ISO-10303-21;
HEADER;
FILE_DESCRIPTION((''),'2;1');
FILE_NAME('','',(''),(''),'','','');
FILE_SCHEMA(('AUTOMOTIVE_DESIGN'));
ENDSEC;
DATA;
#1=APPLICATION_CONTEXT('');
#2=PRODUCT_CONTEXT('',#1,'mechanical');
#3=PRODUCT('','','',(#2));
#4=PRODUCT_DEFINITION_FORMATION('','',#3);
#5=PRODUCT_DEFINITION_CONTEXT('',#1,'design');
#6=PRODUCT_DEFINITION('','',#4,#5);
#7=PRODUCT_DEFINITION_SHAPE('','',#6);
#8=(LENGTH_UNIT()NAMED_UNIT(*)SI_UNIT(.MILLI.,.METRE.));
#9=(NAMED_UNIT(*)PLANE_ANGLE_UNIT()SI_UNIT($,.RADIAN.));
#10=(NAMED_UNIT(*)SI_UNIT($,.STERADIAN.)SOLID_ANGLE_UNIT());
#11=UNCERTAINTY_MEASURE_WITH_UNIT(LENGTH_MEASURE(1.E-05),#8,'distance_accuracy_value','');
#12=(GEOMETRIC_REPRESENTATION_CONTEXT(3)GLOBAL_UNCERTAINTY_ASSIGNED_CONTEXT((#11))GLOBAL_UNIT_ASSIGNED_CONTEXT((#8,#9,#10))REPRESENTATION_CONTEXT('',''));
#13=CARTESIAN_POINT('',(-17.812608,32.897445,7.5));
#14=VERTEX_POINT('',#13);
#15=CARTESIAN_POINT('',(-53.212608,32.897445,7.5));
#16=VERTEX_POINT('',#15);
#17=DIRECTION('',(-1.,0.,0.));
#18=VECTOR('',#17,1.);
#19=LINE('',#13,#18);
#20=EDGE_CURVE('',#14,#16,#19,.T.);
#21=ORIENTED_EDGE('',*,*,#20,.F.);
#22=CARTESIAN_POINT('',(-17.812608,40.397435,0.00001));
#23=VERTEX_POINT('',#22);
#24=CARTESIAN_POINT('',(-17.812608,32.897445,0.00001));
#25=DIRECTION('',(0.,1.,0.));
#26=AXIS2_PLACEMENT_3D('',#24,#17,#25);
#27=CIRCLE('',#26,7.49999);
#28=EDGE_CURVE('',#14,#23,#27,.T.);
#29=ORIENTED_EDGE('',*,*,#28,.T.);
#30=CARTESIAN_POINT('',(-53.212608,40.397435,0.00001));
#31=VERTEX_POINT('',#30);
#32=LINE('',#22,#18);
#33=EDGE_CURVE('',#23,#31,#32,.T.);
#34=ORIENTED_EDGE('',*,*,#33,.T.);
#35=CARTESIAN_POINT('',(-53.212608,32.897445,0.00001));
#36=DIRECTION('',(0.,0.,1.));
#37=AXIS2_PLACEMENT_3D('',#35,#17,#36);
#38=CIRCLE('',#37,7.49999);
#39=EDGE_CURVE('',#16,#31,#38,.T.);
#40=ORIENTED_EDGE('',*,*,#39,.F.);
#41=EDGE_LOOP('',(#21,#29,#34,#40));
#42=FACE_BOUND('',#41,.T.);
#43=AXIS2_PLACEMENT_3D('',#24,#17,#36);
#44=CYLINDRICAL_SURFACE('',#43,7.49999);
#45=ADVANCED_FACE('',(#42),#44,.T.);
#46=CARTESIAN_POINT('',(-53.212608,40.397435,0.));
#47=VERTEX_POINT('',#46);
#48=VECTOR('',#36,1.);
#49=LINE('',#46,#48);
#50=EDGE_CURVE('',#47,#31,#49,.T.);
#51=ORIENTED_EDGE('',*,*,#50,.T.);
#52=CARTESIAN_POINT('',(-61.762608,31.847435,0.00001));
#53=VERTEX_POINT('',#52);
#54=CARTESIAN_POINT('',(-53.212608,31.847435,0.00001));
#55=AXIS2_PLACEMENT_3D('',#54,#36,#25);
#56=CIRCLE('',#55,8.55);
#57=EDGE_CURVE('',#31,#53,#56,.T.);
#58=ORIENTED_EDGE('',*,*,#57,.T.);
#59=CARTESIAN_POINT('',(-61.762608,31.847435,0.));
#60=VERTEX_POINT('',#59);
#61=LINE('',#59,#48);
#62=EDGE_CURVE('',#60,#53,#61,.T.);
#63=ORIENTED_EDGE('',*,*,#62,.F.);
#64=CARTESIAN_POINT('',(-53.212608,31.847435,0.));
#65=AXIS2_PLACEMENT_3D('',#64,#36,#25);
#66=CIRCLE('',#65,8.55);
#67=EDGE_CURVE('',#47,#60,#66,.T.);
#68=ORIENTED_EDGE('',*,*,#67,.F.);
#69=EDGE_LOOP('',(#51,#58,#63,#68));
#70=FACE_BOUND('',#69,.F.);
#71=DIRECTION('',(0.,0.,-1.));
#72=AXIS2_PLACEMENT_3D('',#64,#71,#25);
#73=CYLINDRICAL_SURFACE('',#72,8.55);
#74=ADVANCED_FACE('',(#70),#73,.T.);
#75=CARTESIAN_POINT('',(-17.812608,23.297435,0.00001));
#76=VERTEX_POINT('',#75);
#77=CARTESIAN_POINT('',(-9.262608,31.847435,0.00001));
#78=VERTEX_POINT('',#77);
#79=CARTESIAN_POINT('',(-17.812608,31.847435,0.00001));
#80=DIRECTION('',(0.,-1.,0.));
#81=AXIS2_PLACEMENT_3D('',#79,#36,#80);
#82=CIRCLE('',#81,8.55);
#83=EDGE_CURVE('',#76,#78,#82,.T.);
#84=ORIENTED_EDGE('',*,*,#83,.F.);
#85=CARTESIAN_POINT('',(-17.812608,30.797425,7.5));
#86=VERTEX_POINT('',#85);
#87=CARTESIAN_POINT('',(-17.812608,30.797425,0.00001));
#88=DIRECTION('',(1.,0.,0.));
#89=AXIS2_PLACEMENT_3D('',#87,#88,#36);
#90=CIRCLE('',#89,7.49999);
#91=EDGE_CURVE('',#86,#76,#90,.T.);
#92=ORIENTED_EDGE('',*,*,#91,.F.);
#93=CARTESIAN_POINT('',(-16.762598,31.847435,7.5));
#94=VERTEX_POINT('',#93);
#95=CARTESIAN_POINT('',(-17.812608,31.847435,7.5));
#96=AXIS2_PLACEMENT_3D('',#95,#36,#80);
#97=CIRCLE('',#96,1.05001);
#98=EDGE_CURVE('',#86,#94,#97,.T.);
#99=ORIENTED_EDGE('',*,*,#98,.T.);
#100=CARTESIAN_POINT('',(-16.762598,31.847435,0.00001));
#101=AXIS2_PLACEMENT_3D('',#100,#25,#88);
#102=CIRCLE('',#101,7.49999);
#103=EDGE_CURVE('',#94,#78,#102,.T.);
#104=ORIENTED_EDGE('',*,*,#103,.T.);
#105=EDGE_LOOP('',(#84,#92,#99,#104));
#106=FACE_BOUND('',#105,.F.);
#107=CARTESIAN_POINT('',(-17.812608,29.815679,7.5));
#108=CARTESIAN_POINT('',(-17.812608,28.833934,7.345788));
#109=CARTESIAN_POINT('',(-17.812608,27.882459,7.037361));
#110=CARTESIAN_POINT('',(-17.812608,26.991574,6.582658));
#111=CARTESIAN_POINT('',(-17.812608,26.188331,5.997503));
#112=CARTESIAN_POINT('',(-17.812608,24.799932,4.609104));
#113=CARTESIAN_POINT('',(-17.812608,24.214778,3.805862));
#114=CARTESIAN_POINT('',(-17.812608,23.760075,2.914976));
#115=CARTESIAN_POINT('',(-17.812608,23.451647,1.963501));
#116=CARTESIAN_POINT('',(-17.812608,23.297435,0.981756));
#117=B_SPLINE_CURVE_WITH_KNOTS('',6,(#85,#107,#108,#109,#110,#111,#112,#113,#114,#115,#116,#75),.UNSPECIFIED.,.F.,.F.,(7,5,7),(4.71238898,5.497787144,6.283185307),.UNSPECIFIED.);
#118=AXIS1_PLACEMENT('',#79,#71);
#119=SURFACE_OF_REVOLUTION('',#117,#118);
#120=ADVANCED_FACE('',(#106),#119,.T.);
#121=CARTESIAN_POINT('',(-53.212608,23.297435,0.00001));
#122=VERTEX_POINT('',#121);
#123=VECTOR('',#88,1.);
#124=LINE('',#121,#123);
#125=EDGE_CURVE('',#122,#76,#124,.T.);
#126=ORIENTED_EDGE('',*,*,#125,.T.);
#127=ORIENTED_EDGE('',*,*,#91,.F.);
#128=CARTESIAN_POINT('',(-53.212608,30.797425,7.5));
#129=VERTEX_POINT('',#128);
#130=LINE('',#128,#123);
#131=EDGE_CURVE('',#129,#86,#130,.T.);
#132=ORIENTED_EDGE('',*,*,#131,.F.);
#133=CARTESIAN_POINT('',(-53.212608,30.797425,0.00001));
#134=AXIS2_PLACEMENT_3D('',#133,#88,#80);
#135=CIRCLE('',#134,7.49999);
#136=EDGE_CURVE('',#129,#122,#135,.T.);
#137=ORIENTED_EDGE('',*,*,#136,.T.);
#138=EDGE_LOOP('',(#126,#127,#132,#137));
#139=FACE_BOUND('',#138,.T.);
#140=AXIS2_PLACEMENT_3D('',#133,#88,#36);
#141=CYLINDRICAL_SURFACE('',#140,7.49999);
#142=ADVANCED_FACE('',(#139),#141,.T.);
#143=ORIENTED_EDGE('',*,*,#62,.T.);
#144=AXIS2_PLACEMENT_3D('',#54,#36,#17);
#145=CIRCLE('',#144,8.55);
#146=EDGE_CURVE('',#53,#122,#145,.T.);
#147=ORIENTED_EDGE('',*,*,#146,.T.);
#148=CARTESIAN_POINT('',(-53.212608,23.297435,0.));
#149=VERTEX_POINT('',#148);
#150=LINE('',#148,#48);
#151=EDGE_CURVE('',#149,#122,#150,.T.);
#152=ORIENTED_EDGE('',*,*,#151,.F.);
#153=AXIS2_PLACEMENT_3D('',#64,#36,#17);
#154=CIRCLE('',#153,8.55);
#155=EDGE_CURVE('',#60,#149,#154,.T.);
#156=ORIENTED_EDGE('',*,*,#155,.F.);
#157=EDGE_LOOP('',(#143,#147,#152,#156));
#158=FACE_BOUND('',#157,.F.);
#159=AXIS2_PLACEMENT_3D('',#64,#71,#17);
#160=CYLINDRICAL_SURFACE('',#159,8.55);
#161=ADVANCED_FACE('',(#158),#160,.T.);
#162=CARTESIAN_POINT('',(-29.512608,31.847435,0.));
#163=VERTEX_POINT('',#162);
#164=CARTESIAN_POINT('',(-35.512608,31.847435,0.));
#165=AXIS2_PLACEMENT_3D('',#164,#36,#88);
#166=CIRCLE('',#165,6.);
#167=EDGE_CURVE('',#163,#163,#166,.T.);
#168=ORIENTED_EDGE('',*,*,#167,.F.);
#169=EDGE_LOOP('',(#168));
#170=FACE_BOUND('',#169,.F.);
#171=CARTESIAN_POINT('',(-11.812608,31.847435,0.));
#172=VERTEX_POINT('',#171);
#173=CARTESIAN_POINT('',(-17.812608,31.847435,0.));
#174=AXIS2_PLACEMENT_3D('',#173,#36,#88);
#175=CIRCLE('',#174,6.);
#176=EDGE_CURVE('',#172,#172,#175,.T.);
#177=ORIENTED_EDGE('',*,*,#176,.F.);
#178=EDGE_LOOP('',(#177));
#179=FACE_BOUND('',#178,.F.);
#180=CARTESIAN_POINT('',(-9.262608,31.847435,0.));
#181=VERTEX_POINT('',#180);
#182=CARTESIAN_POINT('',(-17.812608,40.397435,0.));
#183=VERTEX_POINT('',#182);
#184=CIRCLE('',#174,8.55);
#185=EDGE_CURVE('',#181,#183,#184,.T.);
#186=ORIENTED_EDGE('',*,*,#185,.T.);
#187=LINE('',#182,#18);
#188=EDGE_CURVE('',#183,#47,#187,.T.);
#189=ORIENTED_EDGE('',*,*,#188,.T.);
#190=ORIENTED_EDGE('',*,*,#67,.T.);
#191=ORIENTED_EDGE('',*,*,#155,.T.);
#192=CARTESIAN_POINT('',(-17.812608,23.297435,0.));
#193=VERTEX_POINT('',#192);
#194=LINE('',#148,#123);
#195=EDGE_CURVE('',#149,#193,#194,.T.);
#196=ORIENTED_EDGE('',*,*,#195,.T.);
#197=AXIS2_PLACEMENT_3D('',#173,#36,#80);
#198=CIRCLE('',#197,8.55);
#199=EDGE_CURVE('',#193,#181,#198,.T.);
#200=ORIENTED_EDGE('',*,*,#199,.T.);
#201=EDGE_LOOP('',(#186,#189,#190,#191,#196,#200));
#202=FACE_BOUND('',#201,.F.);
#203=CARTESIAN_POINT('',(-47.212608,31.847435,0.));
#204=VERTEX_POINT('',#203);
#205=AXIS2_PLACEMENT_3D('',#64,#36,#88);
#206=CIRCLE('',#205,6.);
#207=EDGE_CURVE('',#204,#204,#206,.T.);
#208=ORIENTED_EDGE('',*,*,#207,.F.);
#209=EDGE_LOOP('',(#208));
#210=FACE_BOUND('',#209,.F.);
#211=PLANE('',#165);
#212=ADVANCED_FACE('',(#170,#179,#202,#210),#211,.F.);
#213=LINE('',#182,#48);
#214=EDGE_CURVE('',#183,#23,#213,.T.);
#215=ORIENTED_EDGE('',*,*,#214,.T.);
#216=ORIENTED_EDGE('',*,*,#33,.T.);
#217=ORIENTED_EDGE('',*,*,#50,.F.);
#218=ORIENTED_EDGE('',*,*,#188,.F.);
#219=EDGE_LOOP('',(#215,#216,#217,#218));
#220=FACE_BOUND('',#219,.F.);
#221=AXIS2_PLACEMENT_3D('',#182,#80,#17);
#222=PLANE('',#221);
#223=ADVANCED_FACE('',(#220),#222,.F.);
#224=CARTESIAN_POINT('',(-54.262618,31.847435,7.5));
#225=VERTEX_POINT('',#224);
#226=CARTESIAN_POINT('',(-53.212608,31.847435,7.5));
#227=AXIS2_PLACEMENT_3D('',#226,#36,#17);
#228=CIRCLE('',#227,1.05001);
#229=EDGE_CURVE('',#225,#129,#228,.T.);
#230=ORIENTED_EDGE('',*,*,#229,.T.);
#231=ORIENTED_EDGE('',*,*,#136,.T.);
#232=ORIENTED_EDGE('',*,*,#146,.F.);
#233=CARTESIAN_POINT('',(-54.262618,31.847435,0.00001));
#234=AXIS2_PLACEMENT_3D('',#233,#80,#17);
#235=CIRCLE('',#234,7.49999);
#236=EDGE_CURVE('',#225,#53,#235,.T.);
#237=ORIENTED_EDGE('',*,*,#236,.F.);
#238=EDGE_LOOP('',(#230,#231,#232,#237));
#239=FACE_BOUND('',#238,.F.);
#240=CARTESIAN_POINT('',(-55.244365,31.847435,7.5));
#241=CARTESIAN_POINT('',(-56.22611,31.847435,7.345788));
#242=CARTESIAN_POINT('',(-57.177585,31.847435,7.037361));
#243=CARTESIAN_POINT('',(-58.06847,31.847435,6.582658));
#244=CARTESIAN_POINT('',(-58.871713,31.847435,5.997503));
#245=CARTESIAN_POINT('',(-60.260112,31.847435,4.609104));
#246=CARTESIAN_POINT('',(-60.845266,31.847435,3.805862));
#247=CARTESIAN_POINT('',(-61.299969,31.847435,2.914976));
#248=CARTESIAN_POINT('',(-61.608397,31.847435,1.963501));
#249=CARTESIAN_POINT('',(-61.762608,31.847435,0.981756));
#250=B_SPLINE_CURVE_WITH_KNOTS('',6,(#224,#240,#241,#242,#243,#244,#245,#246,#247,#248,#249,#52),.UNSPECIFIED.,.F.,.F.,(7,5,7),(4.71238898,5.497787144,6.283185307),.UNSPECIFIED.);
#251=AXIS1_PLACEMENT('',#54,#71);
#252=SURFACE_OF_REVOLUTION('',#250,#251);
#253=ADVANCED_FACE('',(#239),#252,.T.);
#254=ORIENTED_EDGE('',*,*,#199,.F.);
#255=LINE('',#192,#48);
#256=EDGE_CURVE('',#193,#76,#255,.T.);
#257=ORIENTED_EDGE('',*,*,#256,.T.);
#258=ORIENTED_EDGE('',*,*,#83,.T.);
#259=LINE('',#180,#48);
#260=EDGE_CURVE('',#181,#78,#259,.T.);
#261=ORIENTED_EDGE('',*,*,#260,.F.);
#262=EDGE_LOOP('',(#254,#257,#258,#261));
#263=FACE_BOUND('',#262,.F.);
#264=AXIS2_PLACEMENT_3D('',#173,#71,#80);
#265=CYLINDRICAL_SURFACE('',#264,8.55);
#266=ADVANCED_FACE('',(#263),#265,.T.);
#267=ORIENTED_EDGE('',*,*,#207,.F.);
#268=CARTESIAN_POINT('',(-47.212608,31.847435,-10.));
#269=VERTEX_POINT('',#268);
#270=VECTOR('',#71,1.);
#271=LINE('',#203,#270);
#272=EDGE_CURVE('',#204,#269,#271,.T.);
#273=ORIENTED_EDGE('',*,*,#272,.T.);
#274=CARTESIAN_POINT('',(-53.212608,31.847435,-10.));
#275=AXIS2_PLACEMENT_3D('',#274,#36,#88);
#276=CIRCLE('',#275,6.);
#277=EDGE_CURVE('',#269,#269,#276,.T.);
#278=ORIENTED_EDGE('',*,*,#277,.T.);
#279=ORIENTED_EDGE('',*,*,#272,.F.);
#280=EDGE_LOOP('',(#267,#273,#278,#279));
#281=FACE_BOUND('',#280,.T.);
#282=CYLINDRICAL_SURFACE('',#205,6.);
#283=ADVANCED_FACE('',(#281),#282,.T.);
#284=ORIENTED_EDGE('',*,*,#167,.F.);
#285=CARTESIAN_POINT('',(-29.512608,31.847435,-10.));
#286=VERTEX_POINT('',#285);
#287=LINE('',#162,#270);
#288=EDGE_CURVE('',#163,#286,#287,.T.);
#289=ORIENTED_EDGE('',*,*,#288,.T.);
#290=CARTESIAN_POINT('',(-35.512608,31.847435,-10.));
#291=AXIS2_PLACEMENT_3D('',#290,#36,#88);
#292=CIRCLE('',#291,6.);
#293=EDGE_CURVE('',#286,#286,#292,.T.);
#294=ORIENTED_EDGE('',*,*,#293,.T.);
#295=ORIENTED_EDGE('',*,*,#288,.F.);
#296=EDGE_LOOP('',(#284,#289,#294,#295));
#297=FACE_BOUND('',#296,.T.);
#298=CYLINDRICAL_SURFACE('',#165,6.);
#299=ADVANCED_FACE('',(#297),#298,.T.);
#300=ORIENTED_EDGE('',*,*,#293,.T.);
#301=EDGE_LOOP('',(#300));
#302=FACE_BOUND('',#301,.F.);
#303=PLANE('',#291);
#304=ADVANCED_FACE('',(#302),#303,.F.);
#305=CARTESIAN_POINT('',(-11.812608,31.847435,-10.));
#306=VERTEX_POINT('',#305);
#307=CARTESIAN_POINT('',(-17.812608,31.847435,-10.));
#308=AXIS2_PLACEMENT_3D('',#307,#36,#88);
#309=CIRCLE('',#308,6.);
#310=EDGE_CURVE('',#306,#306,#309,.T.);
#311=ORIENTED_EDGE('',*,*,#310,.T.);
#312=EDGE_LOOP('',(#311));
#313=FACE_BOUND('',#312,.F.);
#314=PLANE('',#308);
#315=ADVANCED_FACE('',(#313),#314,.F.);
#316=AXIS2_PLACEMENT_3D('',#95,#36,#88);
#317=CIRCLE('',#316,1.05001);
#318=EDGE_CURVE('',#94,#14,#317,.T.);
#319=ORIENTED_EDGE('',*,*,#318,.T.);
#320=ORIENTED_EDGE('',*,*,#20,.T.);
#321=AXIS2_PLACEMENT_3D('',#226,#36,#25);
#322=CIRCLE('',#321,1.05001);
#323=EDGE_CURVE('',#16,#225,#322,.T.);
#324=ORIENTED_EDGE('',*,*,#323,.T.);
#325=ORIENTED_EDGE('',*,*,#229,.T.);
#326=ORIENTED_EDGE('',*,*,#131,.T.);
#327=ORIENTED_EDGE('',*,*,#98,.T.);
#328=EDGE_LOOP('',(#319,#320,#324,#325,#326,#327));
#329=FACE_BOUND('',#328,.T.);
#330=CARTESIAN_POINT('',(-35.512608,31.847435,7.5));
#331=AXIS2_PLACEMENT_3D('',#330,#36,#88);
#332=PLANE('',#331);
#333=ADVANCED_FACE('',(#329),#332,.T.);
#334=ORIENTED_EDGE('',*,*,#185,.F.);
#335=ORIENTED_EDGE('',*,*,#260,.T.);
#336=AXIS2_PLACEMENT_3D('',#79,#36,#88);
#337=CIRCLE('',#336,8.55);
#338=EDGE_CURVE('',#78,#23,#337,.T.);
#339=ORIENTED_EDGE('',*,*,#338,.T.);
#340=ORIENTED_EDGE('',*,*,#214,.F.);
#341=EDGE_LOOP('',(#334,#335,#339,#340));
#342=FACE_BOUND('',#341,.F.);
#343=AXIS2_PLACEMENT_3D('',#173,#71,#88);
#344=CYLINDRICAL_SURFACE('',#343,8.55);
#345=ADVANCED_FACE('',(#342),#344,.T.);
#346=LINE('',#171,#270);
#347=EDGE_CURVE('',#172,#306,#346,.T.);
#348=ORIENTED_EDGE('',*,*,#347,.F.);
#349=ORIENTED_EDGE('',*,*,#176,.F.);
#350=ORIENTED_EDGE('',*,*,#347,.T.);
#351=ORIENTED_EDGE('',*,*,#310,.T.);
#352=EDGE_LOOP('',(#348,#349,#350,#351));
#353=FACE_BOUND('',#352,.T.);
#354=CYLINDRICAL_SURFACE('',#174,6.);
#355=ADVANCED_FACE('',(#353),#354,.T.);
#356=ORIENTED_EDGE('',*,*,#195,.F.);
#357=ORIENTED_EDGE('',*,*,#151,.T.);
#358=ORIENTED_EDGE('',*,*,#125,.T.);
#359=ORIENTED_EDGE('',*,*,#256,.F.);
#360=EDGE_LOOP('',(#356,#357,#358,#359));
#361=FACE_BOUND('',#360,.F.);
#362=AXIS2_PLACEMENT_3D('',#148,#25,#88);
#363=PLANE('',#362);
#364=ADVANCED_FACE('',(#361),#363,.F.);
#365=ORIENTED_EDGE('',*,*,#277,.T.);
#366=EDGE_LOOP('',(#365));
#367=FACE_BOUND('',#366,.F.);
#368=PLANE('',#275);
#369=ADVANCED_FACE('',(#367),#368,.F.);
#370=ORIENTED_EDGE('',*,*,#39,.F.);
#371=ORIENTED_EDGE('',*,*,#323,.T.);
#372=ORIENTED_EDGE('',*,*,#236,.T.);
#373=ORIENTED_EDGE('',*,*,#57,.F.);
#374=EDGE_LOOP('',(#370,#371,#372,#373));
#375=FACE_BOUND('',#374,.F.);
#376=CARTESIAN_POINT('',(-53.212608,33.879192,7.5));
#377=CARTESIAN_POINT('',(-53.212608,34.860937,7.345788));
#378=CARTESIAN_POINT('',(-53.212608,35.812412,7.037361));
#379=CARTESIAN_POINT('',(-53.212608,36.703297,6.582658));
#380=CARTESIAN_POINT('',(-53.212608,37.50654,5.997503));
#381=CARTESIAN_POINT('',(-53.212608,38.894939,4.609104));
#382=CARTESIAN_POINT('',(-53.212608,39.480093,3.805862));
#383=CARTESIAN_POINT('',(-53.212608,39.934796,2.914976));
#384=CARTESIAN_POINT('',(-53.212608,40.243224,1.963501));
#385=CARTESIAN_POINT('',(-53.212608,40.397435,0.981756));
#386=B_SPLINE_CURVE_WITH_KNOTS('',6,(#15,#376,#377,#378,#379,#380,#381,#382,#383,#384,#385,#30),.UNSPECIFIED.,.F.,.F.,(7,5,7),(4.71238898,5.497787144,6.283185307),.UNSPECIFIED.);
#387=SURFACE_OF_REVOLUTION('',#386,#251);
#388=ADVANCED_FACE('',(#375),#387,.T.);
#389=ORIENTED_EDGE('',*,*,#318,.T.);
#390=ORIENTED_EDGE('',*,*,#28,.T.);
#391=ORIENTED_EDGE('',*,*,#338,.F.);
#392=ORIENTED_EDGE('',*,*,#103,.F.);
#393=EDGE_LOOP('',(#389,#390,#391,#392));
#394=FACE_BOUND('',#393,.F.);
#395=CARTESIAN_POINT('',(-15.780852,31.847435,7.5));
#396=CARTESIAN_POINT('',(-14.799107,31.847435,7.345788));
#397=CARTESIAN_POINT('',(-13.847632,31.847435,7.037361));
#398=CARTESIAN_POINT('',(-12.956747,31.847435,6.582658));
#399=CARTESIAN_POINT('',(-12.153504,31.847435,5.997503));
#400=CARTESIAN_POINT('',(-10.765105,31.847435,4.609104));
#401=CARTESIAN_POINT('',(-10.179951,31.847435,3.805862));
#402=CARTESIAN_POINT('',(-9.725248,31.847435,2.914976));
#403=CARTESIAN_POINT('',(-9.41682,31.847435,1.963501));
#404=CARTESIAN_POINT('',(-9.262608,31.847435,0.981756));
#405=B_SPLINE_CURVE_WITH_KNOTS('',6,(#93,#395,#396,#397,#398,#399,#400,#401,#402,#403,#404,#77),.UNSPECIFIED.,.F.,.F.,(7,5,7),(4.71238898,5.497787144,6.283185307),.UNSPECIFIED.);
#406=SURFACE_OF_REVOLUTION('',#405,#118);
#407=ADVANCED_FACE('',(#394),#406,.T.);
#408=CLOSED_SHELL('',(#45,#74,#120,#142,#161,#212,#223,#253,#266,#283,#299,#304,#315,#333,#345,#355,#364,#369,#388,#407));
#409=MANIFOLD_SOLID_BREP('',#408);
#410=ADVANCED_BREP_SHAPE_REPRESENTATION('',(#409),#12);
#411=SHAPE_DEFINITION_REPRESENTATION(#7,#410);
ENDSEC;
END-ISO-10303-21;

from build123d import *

# Parameters (mm, degrees)
F0_R     = 6
F1_DEPTH = 7.5
F2_DEPTH = 10
F3_R     = 7.49999


# Not quite as in the source:
# - a fillet or chamfer is up to 0.001 mm smaller than in the source, because OpenCascade refuses the exact size


with BuildPart() as f1:
    # F0 (on Top) → F1 (new body)
    with BuildSketch(Plane.XY):
        with BuildLine():
            Line((-17.8126084931, 40.3974354923), (-53.2126084931, 40.3974354923))
            ThreePointArc((-53.2126084931, 40.3974354923), (-59.2583714722, 37.8931984714), (-61.7626084931, 31.8474354923))
            ThreePointArc((-61.7626084931, 31.8474354923), (-59.2583714722, 25.8016725131), (-53.2126084931, 23.2974354923))
            Line((-53.2126084931, 23.2974354923), (-17.8126084931, 23.2974354923))
            ThreePointArc((-17.8126084931, 23.2974354923), (-11.7668455139, 25.8016725131), (-9.2626084931, 31.8474354923))
            ThreePointArc((-9.2626084931, 31.8474354923), (-11.7668455139, 37.8931984714), (-17.8126084931, 40.3974354923))
        make_face()
        with Locations((-53.2126084931, 31.8474354923)):
            Circle(F0_R, mode=Mode.SUBTRACT)
        with Locations((-35.5126084931, 31.8474354923)):
            Circle(F0_R, mode=Mode.SUBTRACT)
        with Locations((-17.8126084931, 31.8474354923)):
            Circle(F0_R, mode=Mode.SUBTRACT)
        with Locations((-53.2126084931, 31.8474354923)):
            Circle(F0_R)
        with Locations((-35.5126084931, 31.8474354923)):
            Circle(F0_R)
        with Locations((-17.8126084931, 31.8474354923)):
            Circle(F0_R)
    extrude(amount=F1_DEPTH)

    # F0 (on Top) → F2 (join)
    with BuildSketch(Plane.XY):
        with Locations((-53.2126084931, 31.8474354923)):
            Circle(F0_R)
        with Locations((-35.5126084931, 31.8474354923)):
            Circle(F0_R)
        with Locations((-17.8126084931, 31.8474354923)):
            Circle(F0_R)
    extrude(amount=-F2_DEPTH)

    # F3 (radius 7.5 in the source; OpenCascade refuses exactly that, so slightly less here)
    f3_edges = [f1.edges().sort_by_distance(p)[0] for p in [
        (-61.762608, 31.847435, 7.5),
    ]]
    fillet(f3_edges, radius=F3_R)


solid = f1.part
